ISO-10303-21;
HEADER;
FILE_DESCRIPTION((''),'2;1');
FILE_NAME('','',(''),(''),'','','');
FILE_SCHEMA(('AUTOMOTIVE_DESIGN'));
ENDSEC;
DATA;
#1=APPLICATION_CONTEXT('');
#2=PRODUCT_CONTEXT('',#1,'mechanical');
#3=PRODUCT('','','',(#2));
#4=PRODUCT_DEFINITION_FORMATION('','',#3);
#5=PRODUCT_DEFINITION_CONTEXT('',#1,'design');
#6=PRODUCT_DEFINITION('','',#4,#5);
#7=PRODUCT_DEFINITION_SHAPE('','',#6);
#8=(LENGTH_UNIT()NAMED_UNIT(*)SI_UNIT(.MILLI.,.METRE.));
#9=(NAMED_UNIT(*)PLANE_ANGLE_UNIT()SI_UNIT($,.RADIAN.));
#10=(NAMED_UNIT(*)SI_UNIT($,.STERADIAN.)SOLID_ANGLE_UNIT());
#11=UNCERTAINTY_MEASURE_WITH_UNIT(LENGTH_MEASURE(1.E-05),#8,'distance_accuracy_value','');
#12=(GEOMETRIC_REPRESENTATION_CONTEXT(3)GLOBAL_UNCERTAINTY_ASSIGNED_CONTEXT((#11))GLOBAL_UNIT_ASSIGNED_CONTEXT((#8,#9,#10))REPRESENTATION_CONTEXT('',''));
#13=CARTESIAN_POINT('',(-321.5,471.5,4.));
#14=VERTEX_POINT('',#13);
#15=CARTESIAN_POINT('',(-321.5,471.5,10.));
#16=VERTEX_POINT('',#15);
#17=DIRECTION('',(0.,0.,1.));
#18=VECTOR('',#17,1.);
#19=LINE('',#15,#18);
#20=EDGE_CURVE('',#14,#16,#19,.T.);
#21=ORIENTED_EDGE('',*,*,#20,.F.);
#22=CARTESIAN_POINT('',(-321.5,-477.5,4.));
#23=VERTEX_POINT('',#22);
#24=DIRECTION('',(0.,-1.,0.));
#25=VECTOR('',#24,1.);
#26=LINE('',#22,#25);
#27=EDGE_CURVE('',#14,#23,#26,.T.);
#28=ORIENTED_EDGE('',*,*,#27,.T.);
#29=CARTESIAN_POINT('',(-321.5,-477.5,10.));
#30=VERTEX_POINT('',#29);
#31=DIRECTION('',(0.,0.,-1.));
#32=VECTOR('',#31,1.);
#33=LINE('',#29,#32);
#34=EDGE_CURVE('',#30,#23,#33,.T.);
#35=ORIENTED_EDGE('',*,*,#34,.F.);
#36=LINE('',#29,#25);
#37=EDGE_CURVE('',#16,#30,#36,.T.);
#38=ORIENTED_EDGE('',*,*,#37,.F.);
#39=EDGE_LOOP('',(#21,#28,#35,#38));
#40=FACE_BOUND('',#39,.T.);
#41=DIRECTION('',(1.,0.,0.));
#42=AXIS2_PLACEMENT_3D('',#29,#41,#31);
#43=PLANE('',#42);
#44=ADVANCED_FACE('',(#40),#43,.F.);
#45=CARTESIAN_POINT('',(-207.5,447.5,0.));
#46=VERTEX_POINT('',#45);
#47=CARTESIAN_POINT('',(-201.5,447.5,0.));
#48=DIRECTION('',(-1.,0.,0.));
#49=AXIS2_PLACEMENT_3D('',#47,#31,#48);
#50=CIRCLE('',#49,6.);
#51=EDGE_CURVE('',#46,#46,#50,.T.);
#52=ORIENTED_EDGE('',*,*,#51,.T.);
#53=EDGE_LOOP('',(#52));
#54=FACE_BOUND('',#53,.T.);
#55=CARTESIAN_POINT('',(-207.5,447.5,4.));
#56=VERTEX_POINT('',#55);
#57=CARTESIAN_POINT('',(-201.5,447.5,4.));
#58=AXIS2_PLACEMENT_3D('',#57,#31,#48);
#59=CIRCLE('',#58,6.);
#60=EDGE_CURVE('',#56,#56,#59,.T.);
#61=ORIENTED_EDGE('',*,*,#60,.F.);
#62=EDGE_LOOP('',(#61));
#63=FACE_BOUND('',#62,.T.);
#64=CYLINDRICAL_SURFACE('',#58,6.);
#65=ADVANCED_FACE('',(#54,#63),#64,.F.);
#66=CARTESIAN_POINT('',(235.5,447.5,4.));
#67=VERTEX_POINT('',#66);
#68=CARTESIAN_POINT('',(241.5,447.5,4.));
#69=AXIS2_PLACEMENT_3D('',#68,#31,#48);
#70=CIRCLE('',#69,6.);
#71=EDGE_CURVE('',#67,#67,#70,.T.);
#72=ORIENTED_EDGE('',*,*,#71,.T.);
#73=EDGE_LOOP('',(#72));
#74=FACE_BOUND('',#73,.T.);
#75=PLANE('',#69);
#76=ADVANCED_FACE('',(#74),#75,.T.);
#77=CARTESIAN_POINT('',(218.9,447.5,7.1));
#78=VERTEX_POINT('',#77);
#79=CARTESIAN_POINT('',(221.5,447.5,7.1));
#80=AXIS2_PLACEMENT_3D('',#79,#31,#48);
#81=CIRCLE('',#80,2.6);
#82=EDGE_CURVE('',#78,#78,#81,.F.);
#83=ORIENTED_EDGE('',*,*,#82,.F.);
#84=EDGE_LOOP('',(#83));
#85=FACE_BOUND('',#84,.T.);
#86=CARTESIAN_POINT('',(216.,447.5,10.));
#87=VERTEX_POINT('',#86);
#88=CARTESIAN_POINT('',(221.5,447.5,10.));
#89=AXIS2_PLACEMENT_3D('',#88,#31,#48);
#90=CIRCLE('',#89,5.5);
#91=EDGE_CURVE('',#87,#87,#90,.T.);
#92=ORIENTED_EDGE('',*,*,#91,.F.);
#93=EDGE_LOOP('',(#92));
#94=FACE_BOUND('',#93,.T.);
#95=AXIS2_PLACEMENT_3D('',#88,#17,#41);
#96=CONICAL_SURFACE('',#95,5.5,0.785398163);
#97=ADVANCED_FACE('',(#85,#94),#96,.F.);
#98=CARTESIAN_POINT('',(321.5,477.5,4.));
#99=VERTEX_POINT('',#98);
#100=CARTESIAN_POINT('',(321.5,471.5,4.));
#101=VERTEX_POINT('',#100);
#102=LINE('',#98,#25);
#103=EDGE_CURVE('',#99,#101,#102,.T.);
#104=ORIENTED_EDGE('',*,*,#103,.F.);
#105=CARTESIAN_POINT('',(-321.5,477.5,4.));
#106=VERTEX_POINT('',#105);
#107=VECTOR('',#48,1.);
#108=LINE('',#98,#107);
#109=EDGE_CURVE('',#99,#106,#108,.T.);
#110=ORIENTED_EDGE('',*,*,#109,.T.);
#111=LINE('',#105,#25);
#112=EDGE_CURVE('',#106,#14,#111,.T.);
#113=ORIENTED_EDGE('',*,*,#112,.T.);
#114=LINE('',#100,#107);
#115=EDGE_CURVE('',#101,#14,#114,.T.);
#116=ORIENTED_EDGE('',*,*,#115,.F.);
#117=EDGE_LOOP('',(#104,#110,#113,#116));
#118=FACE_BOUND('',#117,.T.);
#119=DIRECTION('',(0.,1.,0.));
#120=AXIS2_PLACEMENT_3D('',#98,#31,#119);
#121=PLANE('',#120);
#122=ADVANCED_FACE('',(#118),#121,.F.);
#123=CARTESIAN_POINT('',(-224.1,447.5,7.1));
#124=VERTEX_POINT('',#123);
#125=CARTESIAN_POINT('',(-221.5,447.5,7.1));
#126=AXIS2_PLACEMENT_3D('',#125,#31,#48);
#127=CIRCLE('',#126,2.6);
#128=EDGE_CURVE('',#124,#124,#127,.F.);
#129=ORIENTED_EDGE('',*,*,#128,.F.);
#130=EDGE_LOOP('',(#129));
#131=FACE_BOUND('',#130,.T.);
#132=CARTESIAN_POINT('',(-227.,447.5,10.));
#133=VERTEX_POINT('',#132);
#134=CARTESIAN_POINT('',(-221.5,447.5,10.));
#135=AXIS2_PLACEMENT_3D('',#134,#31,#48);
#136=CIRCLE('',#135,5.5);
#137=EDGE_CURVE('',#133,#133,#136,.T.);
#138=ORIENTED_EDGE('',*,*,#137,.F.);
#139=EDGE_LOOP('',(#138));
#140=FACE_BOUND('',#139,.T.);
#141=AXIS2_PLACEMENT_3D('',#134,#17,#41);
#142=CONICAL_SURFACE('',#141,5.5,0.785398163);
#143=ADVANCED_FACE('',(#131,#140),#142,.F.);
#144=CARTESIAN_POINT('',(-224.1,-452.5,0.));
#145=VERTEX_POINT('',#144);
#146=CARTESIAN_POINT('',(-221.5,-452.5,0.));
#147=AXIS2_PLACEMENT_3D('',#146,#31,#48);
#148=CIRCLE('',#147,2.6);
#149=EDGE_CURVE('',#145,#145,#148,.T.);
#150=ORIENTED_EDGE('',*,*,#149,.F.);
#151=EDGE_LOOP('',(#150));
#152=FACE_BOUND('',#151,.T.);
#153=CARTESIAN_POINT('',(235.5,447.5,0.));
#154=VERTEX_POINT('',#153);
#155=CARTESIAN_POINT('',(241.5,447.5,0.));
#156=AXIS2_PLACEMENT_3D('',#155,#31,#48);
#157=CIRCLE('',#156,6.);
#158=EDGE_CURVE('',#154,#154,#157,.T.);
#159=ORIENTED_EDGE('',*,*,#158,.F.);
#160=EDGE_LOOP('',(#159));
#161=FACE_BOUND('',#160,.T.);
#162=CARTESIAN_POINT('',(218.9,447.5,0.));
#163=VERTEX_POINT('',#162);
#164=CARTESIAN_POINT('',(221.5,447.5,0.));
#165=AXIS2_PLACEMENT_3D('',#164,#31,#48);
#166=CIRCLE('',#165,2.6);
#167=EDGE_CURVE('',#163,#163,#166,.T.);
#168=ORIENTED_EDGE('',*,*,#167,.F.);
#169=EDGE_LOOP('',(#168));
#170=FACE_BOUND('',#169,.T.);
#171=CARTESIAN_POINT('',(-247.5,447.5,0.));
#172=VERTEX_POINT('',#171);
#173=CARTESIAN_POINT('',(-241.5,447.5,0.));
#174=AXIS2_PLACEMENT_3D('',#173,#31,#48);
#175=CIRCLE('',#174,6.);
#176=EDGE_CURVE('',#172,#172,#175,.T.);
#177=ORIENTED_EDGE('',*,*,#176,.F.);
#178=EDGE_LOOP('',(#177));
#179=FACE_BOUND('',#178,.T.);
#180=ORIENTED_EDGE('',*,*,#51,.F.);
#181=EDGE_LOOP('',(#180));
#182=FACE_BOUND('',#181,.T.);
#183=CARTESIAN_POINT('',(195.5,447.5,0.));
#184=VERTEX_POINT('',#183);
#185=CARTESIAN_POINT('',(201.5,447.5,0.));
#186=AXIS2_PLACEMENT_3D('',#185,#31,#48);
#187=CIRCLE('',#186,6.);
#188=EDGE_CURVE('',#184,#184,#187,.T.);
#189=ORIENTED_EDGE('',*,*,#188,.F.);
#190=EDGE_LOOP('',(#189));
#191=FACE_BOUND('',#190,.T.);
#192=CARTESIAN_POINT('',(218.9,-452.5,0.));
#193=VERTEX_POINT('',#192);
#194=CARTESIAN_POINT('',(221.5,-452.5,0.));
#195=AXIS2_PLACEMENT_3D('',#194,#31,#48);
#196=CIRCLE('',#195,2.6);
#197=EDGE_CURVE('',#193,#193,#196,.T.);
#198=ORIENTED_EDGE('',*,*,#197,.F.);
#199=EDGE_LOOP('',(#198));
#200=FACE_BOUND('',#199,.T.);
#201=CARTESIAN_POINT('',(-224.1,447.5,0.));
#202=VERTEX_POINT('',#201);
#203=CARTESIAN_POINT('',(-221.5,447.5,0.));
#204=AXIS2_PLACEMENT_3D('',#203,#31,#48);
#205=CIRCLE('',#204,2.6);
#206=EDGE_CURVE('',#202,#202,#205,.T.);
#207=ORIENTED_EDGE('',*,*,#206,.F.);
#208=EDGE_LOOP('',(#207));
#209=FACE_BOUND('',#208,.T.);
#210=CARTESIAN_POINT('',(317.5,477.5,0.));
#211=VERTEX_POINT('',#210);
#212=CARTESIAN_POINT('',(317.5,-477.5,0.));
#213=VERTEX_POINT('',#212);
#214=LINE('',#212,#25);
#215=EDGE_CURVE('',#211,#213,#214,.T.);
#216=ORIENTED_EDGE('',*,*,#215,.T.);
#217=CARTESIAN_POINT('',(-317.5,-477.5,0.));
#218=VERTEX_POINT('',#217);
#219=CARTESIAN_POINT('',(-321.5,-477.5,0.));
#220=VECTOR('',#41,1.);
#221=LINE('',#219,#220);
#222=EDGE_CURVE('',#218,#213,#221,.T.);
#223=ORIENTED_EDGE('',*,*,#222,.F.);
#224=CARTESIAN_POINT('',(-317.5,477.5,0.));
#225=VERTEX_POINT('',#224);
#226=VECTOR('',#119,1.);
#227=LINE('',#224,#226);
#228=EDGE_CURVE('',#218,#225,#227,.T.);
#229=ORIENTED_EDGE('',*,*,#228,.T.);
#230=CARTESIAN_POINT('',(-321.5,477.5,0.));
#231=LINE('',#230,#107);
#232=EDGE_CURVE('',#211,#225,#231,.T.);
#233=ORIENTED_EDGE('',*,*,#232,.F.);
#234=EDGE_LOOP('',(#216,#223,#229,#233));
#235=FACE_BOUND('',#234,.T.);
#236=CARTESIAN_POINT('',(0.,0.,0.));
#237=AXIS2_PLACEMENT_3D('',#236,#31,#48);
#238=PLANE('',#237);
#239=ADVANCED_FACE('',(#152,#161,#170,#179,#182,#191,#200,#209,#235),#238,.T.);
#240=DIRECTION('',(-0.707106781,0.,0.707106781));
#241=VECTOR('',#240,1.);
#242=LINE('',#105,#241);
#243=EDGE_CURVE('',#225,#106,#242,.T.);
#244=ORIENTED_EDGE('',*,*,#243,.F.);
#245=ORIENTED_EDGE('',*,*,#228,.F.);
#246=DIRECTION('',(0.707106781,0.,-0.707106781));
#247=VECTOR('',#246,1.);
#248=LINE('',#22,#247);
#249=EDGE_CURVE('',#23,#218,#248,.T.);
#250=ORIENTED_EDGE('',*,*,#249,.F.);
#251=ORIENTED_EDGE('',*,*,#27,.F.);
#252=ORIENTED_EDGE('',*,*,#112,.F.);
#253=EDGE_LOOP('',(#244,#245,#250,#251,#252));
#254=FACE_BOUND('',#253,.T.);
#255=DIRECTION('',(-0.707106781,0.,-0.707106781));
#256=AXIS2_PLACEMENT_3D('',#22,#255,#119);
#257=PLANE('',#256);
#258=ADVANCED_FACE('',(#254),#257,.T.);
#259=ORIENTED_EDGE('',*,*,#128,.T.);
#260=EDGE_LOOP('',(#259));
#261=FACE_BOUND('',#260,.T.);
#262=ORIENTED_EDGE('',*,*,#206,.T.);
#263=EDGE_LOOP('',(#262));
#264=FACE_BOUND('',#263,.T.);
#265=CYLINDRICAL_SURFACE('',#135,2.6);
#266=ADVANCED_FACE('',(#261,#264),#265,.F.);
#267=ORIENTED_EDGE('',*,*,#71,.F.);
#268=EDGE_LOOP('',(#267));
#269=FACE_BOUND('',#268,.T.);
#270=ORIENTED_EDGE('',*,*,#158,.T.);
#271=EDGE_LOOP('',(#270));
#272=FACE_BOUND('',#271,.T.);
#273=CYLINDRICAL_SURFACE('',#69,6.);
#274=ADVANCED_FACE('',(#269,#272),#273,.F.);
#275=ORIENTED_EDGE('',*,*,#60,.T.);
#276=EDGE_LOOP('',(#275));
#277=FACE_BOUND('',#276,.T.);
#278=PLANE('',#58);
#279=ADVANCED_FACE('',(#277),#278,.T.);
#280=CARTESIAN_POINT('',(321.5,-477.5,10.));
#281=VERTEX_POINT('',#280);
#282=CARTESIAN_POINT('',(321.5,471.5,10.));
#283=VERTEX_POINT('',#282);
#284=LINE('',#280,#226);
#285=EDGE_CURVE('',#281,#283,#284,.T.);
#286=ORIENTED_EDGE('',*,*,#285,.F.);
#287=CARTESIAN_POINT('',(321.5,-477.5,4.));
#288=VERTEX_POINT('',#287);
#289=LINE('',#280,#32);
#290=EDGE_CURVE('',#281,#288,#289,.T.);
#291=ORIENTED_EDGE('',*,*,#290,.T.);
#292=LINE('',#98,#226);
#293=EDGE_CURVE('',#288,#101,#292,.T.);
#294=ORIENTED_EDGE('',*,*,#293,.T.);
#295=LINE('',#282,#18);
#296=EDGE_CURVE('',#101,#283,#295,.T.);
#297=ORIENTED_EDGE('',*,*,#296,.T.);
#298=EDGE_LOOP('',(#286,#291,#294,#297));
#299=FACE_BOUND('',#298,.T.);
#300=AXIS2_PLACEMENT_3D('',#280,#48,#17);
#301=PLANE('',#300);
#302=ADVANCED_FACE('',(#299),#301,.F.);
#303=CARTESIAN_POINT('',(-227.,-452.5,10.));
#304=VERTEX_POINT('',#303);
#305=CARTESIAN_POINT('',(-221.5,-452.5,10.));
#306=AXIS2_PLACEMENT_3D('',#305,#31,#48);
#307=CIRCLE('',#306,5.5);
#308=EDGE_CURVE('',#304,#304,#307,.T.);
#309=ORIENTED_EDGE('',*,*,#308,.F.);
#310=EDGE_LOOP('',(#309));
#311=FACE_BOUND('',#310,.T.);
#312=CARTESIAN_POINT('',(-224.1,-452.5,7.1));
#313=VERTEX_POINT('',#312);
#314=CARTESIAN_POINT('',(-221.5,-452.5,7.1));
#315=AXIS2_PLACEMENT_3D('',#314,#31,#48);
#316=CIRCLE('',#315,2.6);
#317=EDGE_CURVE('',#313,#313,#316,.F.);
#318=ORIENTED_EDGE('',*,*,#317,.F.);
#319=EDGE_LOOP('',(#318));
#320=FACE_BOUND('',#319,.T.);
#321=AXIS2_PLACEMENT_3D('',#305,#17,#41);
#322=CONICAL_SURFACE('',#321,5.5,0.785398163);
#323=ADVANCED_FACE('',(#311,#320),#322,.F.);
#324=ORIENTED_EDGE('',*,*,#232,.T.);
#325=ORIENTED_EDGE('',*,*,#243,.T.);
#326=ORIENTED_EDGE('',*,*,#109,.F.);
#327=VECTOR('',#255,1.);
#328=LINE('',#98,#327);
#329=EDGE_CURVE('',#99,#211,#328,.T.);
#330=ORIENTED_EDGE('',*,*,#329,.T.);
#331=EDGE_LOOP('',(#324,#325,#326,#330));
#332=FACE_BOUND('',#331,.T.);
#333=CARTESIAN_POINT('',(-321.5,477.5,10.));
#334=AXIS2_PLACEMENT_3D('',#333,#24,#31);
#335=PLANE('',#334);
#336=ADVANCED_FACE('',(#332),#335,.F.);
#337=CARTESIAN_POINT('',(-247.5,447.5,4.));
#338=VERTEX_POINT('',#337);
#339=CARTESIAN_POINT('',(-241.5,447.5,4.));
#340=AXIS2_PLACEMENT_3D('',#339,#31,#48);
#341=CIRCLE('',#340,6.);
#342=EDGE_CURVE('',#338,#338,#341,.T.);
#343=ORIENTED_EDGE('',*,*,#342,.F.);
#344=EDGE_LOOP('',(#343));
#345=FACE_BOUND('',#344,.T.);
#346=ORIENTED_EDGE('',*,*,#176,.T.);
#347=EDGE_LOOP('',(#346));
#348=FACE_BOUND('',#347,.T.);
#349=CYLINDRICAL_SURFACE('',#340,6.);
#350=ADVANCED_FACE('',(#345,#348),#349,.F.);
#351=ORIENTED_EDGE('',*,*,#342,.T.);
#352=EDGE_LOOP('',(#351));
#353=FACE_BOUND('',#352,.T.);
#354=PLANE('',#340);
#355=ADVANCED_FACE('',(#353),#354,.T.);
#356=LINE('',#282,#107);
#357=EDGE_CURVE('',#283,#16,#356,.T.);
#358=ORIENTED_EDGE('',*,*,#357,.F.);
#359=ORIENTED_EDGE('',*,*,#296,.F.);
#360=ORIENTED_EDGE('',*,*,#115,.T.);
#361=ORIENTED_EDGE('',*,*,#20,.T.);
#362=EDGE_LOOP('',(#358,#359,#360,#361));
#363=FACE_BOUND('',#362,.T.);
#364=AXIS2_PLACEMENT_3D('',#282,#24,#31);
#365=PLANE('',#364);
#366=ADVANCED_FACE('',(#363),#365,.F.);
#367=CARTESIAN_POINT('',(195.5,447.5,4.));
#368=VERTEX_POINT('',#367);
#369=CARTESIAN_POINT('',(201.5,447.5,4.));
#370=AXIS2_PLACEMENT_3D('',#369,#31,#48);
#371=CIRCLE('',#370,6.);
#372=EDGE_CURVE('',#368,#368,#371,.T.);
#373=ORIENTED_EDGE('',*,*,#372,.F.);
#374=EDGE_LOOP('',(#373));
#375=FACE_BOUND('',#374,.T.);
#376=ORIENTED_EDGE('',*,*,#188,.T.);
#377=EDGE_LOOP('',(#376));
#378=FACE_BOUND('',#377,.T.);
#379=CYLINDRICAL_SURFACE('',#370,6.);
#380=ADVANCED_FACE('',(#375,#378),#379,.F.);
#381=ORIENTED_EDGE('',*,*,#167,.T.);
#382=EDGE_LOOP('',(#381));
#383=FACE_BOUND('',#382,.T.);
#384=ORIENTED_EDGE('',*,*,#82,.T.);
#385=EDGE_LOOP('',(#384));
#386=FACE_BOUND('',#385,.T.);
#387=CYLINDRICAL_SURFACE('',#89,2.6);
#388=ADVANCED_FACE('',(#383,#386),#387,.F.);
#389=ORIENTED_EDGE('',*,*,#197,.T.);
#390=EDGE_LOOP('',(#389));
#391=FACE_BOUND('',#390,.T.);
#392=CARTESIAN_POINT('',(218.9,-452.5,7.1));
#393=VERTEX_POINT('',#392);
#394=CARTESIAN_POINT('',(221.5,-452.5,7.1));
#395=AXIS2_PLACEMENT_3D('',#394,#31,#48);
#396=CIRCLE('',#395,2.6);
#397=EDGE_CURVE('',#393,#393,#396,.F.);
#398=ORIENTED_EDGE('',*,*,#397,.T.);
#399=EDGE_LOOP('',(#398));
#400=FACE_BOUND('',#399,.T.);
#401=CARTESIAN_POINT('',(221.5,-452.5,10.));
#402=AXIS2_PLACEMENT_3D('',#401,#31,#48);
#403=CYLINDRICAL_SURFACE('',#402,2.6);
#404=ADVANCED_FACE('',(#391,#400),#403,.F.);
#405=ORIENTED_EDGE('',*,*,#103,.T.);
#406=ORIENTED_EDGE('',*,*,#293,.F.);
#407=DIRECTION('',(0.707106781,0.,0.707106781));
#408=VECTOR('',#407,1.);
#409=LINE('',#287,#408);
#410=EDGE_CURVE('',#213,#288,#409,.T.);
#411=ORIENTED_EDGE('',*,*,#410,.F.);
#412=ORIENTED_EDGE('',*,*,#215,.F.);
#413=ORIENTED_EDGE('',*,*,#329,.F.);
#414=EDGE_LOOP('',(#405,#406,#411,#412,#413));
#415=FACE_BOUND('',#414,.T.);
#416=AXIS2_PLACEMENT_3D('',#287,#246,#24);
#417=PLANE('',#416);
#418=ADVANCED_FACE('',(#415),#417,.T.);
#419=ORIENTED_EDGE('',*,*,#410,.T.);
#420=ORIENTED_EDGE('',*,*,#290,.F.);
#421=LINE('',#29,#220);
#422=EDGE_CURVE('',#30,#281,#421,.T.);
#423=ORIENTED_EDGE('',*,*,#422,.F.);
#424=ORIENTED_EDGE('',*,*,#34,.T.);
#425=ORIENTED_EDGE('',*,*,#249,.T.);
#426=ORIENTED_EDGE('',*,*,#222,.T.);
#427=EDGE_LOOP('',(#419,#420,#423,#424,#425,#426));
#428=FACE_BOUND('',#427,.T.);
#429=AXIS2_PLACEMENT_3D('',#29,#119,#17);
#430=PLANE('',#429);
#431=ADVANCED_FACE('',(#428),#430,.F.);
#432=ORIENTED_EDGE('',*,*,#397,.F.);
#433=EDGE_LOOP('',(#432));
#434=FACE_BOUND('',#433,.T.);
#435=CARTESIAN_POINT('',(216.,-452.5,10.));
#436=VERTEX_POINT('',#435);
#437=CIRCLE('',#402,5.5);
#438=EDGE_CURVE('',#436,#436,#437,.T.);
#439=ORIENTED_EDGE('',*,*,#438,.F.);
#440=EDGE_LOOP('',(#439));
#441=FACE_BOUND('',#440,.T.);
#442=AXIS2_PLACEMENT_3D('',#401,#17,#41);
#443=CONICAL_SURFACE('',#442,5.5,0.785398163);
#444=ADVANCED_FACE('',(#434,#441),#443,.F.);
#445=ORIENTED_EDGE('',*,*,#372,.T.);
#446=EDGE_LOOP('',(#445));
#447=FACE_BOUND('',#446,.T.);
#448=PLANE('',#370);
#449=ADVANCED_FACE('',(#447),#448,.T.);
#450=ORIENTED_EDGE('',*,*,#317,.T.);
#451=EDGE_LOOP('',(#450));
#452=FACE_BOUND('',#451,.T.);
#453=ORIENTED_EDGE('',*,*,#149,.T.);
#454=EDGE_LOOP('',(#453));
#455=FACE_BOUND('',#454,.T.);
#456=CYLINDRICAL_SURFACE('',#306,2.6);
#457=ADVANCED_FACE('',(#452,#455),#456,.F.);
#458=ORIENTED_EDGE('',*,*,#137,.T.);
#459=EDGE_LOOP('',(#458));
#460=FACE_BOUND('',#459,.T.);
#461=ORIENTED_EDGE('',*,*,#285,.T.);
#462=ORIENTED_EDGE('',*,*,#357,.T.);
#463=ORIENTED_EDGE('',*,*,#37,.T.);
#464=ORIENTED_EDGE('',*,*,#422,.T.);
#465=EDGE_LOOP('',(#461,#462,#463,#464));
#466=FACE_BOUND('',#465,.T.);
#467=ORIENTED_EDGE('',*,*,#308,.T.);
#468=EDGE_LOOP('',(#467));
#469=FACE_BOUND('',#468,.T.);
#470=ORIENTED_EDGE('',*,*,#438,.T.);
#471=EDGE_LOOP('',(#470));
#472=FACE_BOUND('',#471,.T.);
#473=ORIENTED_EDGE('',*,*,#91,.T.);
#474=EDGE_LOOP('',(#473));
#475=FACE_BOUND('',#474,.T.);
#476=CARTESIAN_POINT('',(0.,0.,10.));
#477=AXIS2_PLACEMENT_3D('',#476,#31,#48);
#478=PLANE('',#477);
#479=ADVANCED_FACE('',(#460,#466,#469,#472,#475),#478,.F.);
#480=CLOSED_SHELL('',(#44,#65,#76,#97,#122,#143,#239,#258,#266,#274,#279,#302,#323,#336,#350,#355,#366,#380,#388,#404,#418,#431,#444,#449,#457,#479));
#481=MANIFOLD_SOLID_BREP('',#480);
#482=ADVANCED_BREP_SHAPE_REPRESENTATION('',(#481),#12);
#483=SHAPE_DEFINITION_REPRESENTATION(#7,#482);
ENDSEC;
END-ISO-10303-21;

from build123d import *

# Parameters (mm, degrees)
SKETCH1_W           = 643
SKETCH1_H           = 955
BOSS_EXTRUDE1_DEPTH = 10
SKETCH2_W           = 6
SKETCH2_H           = 6
CUT_EXTRUDE1_DEPTH  = 801.971441438
CHAMFER1_SIZE       = 4
SKETCH3_R           = 2.6
CUT_EXTRUDE2_DEPTH  = 576.733011039
CHAMFER2_SIZE       = 2.9
SKETCH4_R           = 6
CUT_EXTRUDE3_DEPTH  = 4


with BuildPart() as part:
    # Sketch1 → Boss-Extrude1 (new body)
    with BuildSketch(Plane.XY):
        Rectangle(SKETCH1_W, SKETCH1_H)
    extrude(amount=BOSS_EXTRUDE1_DEPTH)

    # Sketch2 → Cut-Extrude1 (cut, through all)
    with BuildSketch(Plane.ZY.offset(321.5)):
        with Locations((7, 474.5)):
            Rectangle(SKETCH2_W, SKETCH2_H)
    extrude(amount=-CUT_EXTRUDE1_DEPTH, mode=Mode.SUBTRACT)

    # Chamfer1
    chamfer1_edges = [part.edges().sort_by_distance(p)[0] for p in [
        (321.5, 0, 0),
        (-321.5, 0, 0),
    ]]
    chamfer(chamfer1_edges, length=CHAMFER1_SIZE - 0.0001)  # a hair under: the kernel refuses the full size

    # Sketch3 → Cut-Extrude2 (cut, through all)
    with BuildSketch(Plane(origin=(0, 0, 0), x_dir=(-1, 0, 0), z_dir=(0, 0, -1))):
        with Locations((-221.5, -452.5)):
            Circle(SKETCH3_R)
        with Locations((221.5, -452.5)):
            Circle(SKETCH3_R)
        with Locations((221.5, 447.5)):
            Circle(SKETCH3_R)
        with Locations((-221.5, 447.5)):
            Circle(SKETCH3_R)
    extrude(amount=-CUT_EXTRUDE2_DEPTH, mode=Mode.SUBTRACT)

    # Chamfer2
    chamfer2_edges = [part.edges().sort_by_distance(p)[0] for p in [
        (224.1, -452.5, 10),
        (-218.9, -452.5, 10),
        (-218.9, 447.5, 10),
        (224.1, 447.5, 10),
    ]]
    chamfer(chamfer2_edges, length=CHAMFER2_SIZE)

    # Sketch4 → Cut-Extrude3 (cut)
    with BuildSketch(Plane(origin=(0, 0, 0), x_dir=(-1, 0, 0), z_dir=(0, 0, -1))):
        with Locations((-241.5, 447.5)):
            Circle(SKETCH4_R)
        with Locations((-201.5, 447.5)):
            Circle(SKETCH4_R)
        with Locations((201.5, 447.5)):
            Circle(SKETCH4_R)
        with Locations((241.5, 447.5)):
            Circle(SKETCH4_R)
    extrude(amount=-CUT_EXTRUDE3_DEPTH, mode=Mode.SUBTRACT)


solid = part.part
